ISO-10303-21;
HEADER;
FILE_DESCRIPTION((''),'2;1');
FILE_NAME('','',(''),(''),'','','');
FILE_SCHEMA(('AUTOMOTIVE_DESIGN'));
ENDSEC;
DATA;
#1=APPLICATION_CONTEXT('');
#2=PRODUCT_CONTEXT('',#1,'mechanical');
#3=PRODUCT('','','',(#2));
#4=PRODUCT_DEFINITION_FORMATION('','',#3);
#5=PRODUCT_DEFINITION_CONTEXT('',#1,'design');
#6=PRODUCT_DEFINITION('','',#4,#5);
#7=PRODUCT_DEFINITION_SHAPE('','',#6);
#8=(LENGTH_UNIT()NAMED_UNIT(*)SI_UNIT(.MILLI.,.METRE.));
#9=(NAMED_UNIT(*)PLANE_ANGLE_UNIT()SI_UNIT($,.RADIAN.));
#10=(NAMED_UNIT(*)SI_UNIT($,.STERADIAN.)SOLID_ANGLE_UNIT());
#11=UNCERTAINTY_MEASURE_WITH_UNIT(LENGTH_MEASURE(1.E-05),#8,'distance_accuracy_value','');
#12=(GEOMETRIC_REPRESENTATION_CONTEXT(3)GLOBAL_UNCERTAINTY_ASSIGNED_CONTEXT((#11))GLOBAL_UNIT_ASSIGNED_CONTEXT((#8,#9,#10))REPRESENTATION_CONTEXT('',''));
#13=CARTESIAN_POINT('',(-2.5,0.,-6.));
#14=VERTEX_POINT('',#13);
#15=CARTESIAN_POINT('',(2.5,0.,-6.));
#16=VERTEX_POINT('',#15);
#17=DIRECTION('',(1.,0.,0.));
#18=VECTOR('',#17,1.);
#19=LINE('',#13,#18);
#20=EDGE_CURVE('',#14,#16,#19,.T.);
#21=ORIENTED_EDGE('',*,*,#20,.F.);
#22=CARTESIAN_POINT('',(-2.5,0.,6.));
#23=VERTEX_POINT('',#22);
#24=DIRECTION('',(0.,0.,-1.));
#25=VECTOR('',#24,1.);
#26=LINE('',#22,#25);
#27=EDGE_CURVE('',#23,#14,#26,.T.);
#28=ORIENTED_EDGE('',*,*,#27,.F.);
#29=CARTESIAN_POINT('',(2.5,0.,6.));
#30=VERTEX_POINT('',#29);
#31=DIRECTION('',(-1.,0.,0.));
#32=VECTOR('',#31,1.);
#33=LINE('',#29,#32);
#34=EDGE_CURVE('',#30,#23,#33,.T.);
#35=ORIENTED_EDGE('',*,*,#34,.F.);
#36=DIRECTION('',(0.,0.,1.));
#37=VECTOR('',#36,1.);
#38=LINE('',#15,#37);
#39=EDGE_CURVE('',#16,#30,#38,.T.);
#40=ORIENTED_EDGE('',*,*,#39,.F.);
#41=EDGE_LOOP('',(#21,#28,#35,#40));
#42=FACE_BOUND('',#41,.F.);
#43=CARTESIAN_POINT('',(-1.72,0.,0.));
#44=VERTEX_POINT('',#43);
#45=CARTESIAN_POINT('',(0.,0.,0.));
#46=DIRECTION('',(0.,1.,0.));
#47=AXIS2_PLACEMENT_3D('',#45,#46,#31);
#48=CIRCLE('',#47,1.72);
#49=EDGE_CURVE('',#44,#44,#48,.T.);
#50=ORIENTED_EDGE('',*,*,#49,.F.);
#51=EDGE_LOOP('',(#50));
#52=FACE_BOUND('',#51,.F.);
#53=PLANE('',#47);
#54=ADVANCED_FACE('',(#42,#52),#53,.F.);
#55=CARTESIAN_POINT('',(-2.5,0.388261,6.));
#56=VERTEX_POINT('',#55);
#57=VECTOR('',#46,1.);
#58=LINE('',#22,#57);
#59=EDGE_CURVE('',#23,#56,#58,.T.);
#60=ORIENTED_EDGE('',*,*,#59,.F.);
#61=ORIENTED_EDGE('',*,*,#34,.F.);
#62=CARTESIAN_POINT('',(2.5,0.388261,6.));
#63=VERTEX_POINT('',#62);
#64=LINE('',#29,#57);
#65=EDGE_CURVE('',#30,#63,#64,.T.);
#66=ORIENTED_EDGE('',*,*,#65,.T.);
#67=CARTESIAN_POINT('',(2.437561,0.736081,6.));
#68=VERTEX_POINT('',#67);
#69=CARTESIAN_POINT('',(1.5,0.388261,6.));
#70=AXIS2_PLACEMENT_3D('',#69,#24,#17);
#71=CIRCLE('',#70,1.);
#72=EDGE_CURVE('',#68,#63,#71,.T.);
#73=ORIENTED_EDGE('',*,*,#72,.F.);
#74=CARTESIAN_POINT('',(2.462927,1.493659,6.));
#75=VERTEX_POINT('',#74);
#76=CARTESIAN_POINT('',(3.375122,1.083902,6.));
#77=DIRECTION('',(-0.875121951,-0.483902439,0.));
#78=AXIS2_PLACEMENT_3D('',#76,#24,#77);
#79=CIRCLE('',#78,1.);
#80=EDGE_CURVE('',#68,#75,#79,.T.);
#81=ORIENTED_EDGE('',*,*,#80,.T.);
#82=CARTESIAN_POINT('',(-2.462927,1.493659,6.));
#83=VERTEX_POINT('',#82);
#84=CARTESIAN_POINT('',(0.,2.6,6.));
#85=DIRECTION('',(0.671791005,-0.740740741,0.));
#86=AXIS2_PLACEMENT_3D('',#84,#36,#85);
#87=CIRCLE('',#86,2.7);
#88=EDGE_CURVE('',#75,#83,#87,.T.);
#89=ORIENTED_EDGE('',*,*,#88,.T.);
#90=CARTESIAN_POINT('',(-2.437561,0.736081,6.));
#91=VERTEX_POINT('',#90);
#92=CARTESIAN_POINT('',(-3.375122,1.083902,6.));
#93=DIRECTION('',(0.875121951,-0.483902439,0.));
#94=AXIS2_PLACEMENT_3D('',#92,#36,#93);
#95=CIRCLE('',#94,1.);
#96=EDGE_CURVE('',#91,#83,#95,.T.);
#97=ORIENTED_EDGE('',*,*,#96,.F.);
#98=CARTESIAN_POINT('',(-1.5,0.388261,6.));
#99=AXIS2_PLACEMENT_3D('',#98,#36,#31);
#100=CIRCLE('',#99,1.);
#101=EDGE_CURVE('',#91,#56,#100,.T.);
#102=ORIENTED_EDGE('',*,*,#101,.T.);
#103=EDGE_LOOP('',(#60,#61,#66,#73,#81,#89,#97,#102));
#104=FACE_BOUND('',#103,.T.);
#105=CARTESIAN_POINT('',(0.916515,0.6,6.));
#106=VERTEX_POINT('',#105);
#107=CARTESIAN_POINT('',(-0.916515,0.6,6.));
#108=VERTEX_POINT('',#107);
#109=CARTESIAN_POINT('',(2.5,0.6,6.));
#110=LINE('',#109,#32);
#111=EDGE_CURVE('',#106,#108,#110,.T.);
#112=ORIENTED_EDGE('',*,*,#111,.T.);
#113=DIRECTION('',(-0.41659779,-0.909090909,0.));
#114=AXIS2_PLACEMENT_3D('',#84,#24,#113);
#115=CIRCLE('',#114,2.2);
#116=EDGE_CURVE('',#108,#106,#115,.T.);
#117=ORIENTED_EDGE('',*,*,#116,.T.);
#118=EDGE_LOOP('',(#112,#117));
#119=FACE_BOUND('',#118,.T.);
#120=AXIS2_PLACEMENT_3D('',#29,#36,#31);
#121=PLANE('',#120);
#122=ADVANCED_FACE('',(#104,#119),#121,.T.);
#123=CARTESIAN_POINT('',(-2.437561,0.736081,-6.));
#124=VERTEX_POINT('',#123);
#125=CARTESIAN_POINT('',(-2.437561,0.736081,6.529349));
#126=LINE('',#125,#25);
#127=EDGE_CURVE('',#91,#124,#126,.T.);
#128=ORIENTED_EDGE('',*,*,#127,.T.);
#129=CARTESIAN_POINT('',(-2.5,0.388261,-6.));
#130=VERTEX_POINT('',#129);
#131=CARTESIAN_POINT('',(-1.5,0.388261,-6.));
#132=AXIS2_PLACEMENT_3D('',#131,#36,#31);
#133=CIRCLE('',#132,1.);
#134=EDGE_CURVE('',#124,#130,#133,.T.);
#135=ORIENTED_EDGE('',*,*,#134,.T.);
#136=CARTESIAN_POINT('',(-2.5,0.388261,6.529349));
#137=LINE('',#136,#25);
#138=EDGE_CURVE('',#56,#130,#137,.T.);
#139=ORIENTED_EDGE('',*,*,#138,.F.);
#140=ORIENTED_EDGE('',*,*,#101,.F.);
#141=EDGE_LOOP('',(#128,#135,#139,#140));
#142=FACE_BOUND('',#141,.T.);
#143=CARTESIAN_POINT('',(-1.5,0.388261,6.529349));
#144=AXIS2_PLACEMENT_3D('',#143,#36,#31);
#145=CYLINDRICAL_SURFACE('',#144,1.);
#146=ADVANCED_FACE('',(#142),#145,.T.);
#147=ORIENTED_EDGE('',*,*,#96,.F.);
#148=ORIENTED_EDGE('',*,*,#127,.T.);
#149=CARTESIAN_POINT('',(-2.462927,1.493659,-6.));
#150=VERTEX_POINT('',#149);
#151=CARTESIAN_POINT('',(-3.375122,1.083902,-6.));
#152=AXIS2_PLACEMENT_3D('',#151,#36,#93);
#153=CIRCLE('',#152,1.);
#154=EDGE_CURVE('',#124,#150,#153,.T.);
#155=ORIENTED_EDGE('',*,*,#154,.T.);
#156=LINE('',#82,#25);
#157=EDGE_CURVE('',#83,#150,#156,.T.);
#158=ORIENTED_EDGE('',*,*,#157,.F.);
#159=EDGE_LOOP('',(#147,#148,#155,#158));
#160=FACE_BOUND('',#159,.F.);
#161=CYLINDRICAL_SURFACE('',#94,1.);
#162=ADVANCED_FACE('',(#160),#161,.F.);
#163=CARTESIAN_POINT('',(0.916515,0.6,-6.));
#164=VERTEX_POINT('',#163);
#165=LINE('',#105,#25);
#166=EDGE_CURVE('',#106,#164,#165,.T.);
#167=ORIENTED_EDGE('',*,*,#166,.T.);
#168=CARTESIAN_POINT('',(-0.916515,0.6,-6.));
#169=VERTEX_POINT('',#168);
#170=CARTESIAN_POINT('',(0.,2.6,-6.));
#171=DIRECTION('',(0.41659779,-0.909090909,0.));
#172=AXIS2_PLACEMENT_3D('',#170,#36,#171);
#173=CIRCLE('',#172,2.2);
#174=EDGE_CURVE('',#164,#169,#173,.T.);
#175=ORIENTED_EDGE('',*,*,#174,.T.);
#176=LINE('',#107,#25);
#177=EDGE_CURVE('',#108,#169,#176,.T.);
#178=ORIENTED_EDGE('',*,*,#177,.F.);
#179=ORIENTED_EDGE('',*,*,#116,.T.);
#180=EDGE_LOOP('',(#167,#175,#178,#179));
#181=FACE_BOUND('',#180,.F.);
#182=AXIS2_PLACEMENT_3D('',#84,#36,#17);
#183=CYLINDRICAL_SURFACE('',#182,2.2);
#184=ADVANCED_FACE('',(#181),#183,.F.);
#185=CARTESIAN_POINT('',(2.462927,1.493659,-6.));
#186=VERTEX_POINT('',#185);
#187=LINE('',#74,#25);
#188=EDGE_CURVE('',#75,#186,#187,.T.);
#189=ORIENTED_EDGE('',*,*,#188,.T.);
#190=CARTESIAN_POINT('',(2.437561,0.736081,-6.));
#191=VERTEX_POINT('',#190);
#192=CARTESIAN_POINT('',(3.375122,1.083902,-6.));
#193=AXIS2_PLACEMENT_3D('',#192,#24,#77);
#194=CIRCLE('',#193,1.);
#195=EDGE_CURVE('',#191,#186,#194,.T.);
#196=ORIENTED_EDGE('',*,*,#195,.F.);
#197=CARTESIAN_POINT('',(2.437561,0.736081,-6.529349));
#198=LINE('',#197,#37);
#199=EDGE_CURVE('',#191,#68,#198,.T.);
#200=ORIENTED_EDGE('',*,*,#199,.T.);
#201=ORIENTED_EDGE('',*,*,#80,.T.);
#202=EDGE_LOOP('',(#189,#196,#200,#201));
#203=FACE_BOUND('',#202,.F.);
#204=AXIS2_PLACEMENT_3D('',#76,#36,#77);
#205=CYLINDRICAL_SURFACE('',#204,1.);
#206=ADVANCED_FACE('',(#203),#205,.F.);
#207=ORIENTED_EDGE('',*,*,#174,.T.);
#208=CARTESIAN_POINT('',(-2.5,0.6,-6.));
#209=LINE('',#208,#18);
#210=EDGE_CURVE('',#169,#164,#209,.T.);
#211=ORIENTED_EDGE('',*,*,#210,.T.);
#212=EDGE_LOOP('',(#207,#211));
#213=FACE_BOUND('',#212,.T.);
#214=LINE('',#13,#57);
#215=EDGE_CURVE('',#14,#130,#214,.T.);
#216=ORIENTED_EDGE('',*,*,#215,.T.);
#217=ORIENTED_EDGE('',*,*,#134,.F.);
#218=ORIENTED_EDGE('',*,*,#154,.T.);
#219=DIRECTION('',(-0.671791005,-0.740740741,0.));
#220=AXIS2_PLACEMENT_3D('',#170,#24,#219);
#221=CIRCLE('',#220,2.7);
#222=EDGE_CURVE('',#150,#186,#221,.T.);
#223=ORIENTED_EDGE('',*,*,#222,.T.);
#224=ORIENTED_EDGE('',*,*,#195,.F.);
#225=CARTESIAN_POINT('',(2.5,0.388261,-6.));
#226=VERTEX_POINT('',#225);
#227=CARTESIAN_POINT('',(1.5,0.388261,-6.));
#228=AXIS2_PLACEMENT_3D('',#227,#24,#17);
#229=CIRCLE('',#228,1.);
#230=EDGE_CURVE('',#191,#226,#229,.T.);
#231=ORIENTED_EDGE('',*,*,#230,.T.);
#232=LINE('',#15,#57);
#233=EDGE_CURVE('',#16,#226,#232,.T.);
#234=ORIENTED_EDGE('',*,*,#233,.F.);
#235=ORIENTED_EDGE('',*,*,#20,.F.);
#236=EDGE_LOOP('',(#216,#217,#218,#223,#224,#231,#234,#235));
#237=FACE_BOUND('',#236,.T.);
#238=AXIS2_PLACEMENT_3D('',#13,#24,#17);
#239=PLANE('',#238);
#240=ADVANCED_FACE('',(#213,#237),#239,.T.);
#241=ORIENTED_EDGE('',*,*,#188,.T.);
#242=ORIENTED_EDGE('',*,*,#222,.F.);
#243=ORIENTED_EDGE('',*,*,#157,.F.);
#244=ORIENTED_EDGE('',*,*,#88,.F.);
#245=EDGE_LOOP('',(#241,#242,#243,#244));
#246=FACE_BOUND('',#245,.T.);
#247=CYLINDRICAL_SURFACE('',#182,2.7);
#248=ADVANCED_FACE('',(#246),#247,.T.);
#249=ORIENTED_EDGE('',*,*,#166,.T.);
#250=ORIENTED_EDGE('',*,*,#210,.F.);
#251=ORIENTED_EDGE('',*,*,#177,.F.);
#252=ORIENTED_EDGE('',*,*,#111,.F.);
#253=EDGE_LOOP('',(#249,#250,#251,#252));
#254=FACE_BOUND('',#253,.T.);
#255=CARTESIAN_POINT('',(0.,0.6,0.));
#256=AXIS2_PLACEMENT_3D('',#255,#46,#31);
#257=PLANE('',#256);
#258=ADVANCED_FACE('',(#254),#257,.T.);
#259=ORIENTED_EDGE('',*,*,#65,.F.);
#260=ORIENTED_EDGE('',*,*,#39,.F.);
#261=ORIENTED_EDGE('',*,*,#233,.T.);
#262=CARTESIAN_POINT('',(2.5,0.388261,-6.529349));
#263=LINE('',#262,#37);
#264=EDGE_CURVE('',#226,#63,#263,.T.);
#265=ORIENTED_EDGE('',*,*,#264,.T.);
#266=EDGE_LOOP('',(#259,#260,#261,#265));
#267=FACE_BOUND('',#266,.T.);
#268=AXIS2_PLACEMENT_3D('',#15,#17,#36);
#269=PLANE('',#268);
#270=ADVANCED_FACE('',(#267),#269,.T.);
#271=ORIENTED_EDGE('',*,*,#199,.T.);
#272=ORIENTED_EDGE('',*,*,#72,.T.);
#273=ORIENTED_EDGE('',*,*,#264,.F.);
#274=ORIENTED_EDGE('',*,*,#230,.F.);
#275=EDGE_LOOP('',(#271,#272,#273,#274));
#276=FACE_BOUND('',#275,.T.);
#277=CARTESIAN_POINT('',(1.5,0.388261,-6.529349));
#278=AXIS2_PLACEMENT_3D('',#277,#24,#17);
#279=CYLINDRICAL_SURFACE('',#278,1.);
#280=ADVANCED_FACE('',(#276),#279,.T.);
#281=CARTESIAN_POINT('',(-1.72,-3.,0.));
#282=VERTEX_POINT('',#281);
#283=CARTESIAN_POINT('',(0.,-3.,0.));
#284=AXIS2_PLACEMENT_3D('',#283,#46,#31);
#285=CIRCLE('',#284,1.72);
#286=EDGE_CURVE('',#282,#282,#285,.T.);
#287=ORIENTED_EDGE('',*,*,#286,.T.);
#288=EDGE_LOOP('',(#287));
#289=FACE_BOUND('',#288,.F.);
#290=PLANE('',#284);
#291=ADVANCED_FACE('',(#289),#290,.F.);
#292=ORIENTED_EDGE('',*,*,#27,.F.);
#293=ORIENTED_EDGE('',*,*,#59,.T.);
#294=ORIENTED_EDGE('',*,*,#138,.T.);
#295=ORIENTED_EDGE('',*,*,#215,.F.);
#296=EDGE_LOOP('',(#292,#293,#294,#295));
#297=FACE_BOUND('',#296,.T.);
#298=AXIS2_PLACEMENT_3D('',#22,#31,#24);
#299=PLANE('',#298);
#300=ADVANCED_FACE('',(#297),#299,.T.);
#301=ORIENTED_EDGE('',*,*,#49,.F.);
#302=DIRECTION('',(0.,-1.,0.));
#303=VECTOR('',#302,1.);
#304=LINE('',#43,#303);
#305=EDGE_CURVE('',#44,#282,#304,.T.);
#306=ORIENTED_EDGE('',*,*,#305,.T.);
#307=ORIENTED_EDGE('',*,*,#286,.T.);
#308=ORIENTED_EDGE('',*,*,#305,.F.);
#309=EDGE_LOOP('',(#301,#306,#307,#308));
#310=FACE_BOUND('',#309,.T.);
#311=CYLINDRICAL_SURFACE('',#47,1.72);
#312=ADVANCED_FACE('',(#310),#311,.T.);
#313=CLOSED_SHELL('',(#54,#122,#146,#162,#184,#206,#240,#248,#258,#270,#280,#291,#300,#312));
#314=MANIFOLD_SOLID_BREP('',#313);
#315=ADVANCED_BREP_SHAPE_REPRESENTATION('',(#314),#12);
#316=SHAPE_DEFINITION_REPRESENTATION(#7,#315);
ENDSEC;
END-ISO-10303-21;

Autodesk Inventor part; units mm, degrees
ref_plane "YZ Plane" through (0, 0, 0) normal (1, 0, 0) x (0, 1, 0)
ref_plane "XZ Plane" through (0, 0, 0) normal (0, 1, 0) x (-1, 0, 0)
ref_plane "XY Plane" through (0, 0, 0) normal (0, 0, 1) x (1, 0, 0)
sketch "Szkic1" plane through (0, 0, 0) normal (0, 1, 0) x (-1, 0, 0)
  circle A0 centre (0, 0) radius 1.72
  line L0 (-2.5, 6) -> (2.5, 6)
  line L1 (2.5, 6) -> (2.5, -6)
  line L2 (2.5, -6) -> (-2.5, -6)
  line L3 (-2.5, -6) -> (-2.5, 6)
  line L4 (-2.5, 6) -> (2.5, -6) construction
  line L5 (2.5, 6) -> (-2.5, -6) construction
  dimension "d0" = 3.44
  dimension "d1" = 5
  dimension "d2" = 12
extrude "Wyciągnięcie proste1" add sketch "Szkic1" against normal blind 3 contours A0
extrude "Wyciągnięcie proste2" add sketch "Szkic1" along normal blind 0.6 contours A0 | L0 L1 L2 L3
sketch "Szkic2" plane through (-2.5, 0, 6) normal (0, 0, 1) x (1, 0, 0)
  line L0 (5, 0.6) -> (0, 0.6) projected
  line L1 (2.5, 0.6) -> (2.5, 2.6)
  line L2 (2.5, 0.6) -> (4.5, 0.6) construction
  circle A0 centre (2.5, 2.6) radius 2.2
  line L3 (0, 0.6) -> (5, 0.6)
  circle A1 centre (2.5, 2.6) radius 2.7
  point P0 (2.5, 0)
  point P1 (4.3138, 0.6)
  point P2 (0.6862, 0.6)
  point P3 (1.5835, 0.6)
  point P4 (3.4165, 0.6)
  dimension "d7" = 2
  dimension "d8" = 90
  dimension "d9" = 4.4
  dimension "d10" = 5.4
extrude "Wyciągnięcie proste3" add sketch "Szkic2" against normal up to surface (12 mm away) contours L0 A0 A1 picked at (4.985, 2.9942)
fillet "Zaokrąglenie1" radius 1 4 edges at (1.8138, 0.6, 0) (-1.8138, 0.6, 0) (2.5, 0.6, 0) (-2.5, 0.6, 0)
properties part number "wire_loop"
